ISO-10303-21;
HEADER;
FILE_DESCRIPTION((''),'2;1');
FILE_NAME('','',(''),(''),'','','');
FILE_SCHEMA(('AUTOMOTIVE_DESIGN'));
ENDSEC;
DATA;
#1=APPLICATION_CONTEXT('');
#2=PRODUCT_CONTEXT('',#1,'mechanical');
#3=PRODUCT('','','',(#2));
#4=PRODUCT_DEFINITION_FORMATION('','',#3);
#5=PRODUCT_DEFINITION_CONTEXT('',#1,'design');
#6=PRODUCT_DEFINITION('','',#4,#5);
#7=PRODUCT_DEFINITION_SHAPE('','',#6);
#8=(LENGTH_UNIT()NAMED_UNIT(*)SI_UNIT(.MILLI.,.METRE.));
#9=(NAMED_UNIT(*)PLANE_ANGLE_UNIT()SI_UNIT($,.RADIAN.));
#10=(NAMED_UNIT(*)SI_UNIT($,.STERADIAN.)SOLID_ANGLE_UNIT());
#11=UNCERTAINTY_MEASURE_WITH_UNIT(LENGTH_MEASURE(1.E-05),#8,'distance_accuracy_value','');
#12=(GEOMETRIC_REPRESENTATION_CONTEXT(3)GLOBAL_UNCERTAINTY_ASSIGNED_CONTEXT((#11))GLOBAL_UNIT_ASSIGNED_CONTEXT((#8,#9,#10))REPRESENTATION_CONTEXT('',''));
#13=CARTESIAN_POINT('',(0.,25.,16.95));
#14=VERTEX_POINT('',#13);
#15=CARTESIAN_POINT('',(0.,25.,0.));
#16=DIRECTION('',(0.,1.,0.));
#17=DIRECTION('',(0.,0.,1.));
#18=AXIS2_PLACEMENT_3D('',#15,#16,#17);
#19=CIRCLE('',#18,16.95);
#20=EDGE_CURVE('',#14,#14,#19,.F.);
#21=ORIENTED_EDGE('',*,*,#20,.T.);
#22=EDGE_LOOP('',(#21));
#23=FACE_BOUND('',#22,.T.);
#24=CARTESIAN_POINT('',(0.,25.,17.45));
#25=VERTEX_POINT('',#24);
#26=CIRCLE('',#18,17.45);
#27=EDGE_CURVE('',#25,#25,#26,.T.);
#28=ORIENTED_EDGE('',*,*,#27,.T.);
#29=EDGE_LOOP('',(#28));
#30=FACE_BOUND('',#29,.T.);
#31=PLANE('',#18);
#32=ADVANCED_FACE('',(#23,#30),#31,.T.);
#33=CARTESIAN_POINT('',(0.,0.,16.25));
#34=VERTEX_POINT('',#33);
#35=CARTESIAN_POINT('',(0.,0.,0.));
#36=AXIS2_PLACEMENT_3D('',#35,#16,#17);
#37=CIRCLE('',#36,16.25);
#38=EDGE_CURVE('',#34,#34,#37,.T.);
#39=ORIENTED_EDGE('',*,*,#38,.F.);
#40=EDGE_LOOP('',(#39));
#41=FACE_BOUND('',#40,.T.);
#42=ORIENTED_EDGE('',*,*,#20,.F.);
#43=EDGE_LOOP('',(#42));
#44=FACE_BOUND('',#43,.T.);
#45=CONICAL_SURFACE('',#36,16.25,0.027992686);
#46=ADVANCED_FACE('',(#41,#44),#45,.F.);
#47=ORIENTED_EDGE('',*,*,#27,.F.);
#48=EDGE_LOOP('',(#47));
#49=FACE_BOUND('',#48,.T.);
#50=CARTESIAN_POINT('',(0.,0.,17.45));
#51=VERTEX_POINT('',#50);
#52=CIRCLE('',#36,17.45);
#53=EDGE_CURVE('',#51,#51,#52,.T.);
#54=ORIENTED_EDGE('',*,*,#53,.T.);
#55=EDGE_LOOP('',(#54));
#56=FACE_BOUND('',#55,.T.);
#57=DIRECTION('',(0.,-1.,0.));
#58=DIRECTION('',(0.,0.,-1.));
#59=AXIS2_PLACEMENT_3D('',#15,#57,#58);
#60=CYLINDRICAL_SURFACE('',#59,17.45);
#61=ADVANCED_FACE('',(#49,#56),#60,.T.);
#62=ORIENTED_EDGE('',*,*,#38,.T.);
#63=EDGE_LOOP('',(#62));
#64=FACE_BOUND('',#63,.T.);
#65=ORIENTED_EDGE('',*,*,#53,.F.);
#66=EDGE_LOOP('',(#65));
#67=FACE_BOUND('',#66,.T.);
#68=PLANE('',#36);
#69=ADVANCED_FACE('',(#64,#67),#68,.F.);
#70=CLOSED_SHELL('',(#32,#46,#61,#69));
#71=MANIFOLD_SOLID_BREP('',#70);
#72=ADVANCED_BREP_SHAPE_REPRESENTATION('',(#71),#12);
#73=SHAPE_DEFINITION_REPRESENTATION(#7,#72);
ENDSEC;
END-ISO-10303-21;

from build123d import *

# Parameters (mm, degrees)
SKETCH1_R           = 17.45
SKETCH1_R_2         = 16.25
BOSS_EXTRUDE1_DEPTH = 25
CHAMFER1_SIZE       = 25
CHAMFER1_SIZE_2     = 0.7


with BuildPart() as part:
    # Sketch1 → Boss-Extrude1 (new body)
    with BuildSketch(Plane(origin=(0, 0, 0), x_dir=(1, 0, 0), z_dir=(0, 1, 0))):
        with Locations(Location((0, 0, 0), (0, 0, 270))):
            Circle(SKETCH1_R)
        with Locations(Location((0, 0, 0), (0, 0, 270))):
            Circle(SKETCH1_R_2, mode=Mode.SUBTRACT)
    extrude(amount=BOSS_EXTRUDE1_DEPTH)

    # Chamfer1
    # the kernel refuses this chamfer: 25, 0.7 mm, written as the material it takes off along each edge
    with BuildSketch(Plane(origin=(0, 25, 0), x_dir=(0, 0, 1), z_dir=(-1, 0, 0))) as chamfer1_piece_1:
        Polygon((16.25, -CHAMFER1_SIZE), (16.25 + CHAMFER1_SIZE_2, 0), (16.25, 0), align=None)
    revolve(axis=Axis((0, 25, 0), (0, 1, 0)), mode=Mode.SUBTRACT)


solid = part.part
